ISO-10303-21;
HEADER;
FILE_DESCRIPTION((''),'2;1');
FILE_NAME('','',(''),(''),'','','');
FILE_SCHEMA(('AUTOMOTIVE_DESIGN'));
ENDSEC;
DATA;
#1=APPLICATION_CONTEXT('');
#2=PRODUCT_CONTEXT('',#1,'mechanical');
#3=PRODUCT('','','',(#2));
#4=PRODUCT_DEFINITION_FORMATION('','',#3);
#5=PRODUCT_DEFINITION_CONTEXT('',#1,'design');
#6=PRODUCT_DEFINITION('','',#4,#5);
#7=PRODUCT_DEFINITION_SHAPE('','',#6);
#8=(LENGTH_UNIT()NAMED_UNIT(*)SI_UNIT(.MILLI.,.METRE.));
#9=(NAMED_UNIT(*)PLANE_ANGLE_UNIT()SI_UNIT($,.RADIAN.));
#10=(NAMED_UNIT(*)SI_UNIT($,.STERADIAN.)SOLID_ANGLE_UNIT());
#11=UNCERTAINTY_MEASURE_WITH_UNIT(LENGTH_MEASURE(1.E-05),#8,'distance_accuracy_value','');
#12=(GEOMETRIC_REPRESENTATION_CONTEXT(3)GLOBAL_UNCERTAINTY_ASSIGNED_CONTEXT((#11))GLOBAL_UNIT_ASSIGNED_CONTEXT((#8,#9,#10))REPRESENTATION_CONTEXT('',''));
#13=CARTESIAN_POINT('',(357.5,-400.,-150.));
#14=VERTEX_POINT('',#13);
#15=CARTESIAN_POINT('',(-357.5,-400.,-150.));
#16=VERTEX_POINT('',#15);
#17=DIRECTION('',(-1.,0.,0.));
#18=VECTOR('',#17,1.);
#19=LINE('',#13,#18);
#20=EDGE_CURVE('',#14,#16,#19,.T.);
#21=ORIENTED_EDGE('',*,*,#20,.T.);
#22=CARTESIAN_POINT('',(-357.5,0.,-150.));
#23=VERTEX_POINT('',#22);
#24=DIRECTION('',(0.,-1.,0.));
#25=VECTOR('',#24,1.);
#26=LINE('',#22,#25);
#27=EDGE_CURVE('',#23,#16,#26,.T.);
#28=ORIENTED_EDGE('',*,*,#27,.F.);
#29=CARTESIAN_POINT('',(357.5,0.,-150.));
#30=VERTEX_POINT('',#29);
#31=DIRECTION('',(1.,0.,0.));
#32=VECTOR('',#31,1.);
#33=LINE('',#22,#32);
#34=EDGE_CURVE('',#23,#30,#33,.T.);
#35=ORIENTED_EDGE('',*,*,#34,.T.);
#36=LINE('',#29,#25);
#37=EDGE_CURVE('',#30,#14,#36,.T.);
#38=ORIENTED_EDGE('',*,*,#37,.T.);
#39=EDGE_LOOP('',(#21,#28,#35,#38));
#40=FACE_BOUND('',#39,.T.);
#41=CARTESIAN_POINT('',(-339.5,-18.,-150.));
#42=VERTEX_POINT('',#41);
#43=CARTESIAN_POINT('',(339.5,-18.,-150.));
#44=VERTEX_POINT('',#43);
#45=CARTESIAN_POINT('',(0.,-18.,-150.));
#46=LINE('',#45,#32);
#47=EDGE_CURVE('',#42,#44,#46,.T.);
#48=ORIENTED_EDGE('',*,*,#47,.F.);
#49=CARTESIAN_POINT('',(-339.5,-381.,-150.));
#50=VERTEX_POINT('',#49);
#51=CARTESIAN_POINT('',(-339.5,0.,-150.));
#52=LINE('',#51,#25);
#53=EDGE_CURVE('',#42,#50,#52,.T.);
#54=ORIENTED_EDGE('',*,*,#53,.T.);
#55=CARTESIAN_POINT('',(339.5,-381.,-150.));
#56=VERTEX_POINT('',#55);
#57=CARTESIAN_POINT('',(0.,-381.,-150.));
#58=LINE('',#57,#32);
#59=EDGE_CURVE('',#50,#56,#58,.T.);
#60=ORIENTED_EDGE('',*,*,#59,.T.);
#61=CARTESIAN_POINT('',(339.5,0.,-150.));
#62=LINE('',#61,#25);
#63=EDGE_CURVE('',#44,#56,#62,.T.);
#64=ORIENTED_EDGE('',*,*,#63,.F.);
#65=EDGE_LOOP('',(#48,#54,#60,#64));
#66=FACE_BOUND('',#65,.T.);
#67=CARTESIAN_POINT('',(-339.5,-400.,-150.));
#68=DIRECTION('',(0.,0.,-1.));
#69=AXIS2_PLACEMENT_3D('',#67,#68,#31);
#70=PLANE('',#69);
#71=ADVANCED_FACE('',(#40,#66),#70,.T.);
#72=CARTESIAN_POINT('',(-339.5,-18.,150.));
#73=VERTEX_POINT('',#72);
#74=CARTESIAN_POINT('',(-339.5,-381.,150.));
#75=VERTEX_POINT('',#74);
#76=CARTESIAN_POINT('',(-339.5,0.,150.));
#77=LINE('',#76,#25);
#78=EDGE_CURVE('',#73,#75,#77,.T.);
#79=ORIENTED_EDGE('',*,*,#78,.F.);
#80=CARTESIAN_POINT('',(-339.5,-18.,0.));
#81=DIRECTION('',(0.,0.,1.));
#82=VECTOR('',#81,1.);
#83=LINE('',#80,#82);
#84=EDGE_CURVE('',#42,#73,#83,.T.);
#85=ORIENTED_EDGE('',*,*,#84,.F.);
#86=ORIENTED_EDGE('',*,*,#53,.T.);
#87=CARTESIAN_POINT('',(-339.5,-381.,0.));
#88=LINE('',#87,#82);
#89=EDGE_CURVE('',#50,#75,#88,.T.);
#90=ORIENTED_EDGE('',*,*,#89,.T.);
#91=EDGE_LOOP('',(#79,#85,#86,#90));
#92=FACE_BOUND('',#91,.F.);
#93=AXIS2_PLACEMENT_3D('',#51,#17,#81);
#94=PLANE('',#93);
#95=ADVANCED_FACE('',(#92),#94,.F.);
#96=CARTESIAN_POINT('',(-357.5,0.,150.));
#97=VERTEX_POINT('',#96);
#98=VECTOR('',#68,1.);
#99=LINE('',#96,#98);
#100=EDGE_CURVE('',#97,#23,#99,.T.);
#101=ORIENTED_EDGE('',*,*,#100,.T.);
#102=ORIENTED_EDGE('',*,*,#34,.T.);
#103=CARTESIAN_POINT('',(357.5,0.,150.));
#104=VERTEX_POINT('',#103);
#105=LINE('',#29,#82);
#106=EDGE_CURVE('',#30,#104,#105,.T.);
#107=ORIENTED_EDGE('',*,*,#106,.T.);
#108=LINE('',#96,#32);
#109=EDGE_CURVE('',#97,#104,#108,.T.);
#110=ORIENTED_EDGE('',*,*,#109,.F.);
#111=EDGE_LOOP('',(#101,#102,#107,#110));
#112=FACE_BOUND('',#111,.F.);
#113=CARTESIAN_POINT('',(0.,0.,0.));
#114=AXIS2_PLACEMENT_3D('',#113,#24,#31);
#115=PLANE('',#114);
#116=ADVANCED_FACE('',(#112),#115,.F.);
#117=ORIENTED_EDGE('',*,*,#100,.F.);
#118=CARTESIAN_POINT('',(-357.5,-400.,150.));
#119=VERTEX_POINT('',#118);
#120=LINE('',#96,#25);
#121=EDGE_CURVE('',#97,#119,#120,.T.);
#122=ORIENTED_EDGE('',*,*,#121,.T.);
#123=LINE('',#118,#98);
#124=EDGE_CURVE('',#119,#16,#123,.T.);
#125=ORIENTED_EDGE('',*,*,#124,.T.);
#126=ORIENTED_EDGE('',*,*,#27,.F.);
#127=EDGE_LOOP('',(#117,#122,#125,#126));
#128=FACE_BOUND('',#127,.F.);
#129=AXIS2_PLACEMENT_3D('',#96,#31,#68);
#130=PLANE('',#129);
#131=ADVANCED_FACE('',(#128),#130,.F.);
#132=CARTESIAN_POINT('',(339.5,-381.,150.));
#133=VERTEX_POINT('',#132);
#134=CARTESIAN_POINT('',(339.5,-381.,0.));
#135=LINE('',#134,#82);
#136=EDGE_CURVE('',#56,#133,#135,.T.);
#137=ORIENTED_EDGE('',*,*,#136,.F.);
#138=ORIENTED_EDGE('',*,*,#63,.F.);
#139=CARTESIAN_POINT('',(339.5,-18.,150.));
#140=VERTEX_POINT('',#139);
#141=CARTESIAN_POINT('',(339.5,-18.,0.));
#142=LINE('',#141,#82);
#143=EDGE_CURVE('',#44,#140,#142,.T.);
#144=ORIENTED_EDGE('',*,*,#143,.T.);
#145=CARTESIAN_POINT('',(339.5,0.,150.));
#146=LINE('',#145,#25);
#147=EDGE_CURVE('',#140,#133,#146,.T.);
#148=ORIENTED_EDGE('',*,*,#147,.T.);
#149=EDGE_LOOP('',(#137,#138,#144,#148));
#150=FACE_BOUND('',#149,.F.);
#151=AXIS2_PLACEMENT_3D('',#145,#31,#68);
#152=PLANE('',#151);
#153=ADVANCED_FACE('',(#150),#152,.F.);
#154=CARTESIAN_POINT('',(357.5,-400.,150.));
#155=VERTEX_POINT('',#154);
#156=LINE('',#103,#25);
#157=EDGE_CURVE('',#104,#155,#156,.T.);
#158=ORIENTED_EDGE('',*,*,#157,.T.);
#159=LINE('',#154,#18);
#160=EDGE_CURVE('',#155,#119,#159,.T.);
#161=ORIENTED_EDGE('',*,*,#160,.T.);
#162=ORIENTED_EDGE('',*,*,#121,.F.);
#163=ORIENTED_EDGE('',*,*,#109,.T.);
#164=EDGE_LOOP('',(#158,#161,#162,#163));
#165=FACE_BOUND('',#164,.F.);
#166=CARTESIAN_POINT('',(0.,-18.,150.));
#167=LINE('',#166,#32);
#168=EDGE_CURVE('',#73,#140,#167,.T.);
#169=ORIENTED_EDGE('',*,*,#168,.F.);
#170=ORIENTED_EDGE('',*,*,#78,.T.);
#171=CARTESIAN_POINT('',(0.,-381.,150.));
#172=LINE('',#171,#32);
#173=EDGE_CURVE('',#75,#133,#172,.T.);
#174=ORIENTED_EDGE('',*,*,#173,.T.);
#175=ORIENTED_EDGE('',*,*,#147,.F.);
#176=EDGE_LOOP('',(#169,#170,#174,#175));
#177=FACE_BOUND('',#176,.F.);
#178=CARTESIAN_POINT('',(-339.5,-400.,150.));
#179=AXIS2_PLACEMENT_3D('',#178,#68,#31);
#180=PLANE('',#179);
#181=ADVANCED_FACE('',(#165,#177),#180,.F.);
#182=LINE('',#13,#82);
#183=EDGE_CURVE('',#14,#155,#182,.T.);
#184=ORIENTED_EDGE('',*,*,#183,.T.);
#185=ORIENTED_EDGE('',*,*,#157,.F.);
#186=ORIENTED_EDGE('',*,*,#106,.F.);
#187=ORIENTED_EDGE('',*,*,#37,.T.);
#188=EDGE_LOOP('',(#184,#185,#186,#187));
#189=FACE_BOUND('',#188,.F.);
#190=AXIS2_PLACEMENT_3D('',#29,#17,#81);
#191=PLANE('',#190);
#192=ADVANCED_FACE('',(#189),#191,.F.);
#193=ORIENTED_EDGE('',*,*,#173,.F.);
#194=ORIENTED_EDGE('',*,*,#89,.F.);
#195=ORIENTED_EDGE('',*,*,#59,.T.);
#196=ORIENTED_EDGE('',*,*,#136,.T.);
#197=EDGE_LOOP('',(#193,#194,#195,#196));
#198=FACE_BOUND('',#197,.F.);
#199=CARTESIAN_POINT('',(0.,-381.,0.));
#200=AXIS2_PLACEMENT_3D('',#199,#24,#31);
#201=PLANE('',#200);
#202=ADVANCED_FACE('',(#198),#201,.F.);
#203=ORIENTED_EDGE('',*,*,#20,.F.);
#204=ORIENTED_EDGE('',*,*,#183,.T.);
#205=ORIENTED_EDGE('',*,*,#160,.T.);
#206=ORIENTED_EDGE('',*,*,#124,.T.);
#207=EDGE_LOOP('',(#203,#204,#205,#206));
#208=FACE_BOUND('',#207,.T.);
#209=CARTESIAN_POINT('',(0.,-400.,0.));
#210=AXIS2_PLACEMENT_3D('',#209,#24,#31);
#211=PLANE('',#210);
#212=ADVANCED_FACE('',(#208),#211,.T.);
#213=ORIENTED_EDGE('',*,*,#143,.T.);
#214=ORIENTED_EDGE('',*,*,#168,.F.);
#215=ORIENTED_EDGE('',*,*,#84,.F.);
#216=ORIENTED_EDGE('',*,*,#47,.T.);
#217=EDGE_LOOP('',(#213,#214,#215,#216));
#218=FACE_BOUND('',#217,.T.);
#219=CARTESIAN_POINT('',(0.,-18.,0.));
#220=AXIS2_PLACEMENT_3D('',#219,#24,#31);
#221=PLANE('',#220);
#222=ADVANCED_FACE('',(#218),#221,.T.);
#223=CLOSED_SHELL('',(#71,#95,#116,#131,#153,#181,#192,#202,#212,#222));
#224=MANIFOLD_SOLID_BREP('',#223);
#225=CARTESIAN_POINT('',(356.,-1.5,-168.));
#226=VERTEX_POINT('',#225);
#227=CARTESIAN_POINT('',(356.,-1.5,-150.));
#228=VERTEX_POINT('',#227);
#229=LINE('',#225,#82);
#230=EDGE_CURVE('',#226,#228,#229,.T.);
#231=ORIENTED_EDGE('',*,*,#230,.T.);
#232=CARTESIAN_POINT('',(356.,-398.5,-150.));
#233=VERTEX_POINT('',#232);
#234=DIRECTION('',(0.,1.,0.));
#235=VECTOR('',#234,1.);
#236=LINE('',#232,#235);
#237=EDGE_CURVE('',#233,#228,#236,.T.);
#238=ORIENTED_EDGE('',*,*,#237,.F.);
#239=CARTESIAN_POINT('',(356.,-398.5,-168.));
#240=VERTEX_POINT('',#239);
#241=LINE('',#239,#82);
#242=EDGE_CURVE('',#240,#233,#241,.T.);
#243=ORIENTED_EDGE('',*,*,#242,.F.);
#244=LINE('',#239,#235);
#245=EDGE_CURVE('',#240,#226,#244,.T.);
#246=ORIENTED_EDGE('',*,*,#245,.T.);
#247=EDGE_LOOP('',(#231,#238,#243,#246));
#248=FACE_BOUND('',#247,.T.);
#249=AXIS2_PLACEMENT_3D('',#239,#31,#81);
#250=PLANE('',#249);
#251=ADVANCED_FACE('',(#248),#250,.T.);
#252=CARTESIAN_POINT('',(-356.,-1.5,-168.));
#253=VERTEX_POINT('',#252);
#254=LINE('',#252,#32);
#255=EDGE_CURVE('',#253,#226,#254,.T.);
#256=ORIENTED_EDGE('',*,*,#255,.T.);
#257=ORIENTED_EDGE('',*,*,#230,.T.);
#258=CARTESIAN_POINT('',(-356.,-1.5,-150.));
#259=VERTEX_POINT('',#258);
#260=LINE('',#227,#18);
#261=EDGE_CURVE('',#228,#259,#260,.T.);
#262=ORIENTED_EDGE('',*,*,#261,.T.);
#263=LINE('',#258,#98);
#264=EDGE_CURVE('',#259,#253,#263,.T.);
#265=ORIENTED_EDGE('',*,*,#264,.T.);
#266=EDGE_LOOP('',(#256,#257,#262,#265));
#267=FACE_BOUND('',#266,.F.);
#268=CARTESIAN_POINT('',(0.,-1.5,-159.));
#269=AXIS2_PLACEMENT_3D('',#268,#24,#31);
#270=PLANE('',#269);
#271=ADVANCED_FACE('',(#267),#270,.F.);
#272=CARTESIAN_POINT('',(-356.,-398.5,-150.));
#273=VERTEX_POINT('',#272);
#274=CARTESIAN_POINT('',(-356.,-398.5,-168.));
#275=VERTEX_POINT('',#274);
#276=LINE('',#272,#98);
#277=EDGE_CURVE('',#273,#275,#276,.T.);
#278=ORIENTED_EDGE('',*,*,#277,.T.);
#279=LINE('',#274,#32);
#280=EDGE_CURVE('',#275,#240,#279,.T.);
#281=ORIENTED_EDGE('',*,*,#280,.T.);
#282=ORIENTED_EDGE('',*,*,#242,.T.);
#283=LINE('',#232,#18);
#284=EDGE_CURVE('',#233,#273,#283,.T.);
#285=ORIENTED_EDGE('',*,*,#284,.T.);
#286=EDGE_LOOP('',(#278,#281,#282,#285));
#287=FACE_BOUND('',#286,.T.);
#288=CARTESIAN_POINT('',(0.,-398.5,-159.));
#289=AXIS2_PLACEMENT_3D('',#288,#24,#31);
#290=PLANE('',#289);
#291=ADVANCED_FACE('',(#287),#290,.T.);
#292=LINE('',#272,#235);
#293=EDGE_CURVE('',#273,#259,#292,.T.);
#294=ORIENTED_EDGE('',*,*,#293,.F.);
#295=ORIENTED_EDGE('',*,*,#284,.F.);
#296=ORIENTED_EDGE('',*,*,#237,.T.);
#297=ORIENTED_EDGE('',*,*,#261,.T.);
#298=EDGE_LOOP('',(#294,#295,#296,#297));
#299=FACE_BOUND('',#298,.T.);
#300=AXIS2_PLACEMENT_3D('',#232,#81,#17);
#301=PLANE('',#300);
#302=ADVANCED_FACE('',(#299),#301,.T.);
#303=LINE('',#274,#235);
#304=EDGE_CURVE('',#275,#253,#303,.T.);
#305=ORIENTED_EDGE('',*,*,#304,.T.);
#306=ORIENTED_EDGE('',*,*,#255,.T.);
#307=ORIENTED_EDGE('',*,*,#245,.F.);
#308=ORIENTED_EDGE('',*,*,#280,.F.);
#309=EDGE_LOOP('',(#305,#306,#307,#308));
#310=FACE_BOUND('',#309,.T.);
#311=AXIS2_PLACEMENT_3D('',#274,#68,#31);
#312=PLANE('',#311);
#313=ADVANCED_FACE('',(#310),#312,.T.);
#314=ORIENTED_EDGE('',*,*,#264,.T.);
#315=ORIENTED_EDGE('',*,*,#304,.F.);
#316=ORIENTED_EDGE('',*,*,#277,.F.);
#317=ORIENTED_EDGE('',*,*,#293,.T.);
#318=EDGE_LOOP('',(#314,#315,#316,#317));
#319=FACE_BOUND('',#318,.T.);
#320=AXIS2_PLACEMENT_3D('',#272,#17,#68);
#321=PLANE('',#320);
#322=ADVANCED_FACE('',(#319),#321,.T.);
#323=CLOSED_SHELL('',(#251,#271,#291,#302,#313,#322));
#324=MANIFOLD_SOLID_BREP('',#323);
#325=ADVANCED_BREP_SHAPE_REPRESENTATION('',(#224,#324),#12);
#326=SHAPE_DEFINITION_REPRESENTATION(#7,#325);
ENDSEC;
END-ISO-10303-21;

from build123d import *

# Parameters (mm, degrees)
F1_DEPTH = 400
F0_W     = 679
F0_H     = 300
F2_DEPTH = 18
F4_W     = 679
F4_H     = 300
F5_DEPTH = 19
F8_DEPTH = 397


with BuildPart() as f1:
    # F0 (on Front) → F1 (new body)
    with BuildSketch(Plane.XZ):
        Polygon((-356, -150), (-339.5, -150), (-339.5, 150), (-357.5, 150), (-357.5, -150), align=None)
    extrude(amount=F1_DEPTH)



with BuildPart() as f1b:
    # F0 (on Front) → F1, piece 2 (new body)
    with BuildSketch(Plane.XZ):
        Polygon((339.5, 150), (339.5, -150), (356, -150), (357.5, -150), (357.5, 150), align=None)
    extrude(amount=F1_DEPTH)


with BuildPart() as f1_1:
    add(f1.part)

    add(f1b.part)  # F2 merges F1b
    # F0 (on Front) → F2 (join)
    with BuildSketch(Plane.XZ):
        Rectangle(F0_W, F0_H)
    extrude(amount=F2_DEPTH)

    # F4 (on offset) → F5 (join)
    with BuildSketch(Plane.XZ.offset(400)):
        Rectangle(F4_W, F4_H)
    extrude(amount=-F5_DEPTH)


with BuildPart() as f8:
    # F7 (on offset) → F8 (new body)
    with BuildSketch(Plane.XZ.offset(398.5)):
        Polygon((339.5, -150), (-339.5, -150), (-356, -150), (-356, -168), (356, -168), (356, -150), align=None)
    extrude(amount=-F8_DEPTH)


solid = Compound([f1_1.part, f8.part])
